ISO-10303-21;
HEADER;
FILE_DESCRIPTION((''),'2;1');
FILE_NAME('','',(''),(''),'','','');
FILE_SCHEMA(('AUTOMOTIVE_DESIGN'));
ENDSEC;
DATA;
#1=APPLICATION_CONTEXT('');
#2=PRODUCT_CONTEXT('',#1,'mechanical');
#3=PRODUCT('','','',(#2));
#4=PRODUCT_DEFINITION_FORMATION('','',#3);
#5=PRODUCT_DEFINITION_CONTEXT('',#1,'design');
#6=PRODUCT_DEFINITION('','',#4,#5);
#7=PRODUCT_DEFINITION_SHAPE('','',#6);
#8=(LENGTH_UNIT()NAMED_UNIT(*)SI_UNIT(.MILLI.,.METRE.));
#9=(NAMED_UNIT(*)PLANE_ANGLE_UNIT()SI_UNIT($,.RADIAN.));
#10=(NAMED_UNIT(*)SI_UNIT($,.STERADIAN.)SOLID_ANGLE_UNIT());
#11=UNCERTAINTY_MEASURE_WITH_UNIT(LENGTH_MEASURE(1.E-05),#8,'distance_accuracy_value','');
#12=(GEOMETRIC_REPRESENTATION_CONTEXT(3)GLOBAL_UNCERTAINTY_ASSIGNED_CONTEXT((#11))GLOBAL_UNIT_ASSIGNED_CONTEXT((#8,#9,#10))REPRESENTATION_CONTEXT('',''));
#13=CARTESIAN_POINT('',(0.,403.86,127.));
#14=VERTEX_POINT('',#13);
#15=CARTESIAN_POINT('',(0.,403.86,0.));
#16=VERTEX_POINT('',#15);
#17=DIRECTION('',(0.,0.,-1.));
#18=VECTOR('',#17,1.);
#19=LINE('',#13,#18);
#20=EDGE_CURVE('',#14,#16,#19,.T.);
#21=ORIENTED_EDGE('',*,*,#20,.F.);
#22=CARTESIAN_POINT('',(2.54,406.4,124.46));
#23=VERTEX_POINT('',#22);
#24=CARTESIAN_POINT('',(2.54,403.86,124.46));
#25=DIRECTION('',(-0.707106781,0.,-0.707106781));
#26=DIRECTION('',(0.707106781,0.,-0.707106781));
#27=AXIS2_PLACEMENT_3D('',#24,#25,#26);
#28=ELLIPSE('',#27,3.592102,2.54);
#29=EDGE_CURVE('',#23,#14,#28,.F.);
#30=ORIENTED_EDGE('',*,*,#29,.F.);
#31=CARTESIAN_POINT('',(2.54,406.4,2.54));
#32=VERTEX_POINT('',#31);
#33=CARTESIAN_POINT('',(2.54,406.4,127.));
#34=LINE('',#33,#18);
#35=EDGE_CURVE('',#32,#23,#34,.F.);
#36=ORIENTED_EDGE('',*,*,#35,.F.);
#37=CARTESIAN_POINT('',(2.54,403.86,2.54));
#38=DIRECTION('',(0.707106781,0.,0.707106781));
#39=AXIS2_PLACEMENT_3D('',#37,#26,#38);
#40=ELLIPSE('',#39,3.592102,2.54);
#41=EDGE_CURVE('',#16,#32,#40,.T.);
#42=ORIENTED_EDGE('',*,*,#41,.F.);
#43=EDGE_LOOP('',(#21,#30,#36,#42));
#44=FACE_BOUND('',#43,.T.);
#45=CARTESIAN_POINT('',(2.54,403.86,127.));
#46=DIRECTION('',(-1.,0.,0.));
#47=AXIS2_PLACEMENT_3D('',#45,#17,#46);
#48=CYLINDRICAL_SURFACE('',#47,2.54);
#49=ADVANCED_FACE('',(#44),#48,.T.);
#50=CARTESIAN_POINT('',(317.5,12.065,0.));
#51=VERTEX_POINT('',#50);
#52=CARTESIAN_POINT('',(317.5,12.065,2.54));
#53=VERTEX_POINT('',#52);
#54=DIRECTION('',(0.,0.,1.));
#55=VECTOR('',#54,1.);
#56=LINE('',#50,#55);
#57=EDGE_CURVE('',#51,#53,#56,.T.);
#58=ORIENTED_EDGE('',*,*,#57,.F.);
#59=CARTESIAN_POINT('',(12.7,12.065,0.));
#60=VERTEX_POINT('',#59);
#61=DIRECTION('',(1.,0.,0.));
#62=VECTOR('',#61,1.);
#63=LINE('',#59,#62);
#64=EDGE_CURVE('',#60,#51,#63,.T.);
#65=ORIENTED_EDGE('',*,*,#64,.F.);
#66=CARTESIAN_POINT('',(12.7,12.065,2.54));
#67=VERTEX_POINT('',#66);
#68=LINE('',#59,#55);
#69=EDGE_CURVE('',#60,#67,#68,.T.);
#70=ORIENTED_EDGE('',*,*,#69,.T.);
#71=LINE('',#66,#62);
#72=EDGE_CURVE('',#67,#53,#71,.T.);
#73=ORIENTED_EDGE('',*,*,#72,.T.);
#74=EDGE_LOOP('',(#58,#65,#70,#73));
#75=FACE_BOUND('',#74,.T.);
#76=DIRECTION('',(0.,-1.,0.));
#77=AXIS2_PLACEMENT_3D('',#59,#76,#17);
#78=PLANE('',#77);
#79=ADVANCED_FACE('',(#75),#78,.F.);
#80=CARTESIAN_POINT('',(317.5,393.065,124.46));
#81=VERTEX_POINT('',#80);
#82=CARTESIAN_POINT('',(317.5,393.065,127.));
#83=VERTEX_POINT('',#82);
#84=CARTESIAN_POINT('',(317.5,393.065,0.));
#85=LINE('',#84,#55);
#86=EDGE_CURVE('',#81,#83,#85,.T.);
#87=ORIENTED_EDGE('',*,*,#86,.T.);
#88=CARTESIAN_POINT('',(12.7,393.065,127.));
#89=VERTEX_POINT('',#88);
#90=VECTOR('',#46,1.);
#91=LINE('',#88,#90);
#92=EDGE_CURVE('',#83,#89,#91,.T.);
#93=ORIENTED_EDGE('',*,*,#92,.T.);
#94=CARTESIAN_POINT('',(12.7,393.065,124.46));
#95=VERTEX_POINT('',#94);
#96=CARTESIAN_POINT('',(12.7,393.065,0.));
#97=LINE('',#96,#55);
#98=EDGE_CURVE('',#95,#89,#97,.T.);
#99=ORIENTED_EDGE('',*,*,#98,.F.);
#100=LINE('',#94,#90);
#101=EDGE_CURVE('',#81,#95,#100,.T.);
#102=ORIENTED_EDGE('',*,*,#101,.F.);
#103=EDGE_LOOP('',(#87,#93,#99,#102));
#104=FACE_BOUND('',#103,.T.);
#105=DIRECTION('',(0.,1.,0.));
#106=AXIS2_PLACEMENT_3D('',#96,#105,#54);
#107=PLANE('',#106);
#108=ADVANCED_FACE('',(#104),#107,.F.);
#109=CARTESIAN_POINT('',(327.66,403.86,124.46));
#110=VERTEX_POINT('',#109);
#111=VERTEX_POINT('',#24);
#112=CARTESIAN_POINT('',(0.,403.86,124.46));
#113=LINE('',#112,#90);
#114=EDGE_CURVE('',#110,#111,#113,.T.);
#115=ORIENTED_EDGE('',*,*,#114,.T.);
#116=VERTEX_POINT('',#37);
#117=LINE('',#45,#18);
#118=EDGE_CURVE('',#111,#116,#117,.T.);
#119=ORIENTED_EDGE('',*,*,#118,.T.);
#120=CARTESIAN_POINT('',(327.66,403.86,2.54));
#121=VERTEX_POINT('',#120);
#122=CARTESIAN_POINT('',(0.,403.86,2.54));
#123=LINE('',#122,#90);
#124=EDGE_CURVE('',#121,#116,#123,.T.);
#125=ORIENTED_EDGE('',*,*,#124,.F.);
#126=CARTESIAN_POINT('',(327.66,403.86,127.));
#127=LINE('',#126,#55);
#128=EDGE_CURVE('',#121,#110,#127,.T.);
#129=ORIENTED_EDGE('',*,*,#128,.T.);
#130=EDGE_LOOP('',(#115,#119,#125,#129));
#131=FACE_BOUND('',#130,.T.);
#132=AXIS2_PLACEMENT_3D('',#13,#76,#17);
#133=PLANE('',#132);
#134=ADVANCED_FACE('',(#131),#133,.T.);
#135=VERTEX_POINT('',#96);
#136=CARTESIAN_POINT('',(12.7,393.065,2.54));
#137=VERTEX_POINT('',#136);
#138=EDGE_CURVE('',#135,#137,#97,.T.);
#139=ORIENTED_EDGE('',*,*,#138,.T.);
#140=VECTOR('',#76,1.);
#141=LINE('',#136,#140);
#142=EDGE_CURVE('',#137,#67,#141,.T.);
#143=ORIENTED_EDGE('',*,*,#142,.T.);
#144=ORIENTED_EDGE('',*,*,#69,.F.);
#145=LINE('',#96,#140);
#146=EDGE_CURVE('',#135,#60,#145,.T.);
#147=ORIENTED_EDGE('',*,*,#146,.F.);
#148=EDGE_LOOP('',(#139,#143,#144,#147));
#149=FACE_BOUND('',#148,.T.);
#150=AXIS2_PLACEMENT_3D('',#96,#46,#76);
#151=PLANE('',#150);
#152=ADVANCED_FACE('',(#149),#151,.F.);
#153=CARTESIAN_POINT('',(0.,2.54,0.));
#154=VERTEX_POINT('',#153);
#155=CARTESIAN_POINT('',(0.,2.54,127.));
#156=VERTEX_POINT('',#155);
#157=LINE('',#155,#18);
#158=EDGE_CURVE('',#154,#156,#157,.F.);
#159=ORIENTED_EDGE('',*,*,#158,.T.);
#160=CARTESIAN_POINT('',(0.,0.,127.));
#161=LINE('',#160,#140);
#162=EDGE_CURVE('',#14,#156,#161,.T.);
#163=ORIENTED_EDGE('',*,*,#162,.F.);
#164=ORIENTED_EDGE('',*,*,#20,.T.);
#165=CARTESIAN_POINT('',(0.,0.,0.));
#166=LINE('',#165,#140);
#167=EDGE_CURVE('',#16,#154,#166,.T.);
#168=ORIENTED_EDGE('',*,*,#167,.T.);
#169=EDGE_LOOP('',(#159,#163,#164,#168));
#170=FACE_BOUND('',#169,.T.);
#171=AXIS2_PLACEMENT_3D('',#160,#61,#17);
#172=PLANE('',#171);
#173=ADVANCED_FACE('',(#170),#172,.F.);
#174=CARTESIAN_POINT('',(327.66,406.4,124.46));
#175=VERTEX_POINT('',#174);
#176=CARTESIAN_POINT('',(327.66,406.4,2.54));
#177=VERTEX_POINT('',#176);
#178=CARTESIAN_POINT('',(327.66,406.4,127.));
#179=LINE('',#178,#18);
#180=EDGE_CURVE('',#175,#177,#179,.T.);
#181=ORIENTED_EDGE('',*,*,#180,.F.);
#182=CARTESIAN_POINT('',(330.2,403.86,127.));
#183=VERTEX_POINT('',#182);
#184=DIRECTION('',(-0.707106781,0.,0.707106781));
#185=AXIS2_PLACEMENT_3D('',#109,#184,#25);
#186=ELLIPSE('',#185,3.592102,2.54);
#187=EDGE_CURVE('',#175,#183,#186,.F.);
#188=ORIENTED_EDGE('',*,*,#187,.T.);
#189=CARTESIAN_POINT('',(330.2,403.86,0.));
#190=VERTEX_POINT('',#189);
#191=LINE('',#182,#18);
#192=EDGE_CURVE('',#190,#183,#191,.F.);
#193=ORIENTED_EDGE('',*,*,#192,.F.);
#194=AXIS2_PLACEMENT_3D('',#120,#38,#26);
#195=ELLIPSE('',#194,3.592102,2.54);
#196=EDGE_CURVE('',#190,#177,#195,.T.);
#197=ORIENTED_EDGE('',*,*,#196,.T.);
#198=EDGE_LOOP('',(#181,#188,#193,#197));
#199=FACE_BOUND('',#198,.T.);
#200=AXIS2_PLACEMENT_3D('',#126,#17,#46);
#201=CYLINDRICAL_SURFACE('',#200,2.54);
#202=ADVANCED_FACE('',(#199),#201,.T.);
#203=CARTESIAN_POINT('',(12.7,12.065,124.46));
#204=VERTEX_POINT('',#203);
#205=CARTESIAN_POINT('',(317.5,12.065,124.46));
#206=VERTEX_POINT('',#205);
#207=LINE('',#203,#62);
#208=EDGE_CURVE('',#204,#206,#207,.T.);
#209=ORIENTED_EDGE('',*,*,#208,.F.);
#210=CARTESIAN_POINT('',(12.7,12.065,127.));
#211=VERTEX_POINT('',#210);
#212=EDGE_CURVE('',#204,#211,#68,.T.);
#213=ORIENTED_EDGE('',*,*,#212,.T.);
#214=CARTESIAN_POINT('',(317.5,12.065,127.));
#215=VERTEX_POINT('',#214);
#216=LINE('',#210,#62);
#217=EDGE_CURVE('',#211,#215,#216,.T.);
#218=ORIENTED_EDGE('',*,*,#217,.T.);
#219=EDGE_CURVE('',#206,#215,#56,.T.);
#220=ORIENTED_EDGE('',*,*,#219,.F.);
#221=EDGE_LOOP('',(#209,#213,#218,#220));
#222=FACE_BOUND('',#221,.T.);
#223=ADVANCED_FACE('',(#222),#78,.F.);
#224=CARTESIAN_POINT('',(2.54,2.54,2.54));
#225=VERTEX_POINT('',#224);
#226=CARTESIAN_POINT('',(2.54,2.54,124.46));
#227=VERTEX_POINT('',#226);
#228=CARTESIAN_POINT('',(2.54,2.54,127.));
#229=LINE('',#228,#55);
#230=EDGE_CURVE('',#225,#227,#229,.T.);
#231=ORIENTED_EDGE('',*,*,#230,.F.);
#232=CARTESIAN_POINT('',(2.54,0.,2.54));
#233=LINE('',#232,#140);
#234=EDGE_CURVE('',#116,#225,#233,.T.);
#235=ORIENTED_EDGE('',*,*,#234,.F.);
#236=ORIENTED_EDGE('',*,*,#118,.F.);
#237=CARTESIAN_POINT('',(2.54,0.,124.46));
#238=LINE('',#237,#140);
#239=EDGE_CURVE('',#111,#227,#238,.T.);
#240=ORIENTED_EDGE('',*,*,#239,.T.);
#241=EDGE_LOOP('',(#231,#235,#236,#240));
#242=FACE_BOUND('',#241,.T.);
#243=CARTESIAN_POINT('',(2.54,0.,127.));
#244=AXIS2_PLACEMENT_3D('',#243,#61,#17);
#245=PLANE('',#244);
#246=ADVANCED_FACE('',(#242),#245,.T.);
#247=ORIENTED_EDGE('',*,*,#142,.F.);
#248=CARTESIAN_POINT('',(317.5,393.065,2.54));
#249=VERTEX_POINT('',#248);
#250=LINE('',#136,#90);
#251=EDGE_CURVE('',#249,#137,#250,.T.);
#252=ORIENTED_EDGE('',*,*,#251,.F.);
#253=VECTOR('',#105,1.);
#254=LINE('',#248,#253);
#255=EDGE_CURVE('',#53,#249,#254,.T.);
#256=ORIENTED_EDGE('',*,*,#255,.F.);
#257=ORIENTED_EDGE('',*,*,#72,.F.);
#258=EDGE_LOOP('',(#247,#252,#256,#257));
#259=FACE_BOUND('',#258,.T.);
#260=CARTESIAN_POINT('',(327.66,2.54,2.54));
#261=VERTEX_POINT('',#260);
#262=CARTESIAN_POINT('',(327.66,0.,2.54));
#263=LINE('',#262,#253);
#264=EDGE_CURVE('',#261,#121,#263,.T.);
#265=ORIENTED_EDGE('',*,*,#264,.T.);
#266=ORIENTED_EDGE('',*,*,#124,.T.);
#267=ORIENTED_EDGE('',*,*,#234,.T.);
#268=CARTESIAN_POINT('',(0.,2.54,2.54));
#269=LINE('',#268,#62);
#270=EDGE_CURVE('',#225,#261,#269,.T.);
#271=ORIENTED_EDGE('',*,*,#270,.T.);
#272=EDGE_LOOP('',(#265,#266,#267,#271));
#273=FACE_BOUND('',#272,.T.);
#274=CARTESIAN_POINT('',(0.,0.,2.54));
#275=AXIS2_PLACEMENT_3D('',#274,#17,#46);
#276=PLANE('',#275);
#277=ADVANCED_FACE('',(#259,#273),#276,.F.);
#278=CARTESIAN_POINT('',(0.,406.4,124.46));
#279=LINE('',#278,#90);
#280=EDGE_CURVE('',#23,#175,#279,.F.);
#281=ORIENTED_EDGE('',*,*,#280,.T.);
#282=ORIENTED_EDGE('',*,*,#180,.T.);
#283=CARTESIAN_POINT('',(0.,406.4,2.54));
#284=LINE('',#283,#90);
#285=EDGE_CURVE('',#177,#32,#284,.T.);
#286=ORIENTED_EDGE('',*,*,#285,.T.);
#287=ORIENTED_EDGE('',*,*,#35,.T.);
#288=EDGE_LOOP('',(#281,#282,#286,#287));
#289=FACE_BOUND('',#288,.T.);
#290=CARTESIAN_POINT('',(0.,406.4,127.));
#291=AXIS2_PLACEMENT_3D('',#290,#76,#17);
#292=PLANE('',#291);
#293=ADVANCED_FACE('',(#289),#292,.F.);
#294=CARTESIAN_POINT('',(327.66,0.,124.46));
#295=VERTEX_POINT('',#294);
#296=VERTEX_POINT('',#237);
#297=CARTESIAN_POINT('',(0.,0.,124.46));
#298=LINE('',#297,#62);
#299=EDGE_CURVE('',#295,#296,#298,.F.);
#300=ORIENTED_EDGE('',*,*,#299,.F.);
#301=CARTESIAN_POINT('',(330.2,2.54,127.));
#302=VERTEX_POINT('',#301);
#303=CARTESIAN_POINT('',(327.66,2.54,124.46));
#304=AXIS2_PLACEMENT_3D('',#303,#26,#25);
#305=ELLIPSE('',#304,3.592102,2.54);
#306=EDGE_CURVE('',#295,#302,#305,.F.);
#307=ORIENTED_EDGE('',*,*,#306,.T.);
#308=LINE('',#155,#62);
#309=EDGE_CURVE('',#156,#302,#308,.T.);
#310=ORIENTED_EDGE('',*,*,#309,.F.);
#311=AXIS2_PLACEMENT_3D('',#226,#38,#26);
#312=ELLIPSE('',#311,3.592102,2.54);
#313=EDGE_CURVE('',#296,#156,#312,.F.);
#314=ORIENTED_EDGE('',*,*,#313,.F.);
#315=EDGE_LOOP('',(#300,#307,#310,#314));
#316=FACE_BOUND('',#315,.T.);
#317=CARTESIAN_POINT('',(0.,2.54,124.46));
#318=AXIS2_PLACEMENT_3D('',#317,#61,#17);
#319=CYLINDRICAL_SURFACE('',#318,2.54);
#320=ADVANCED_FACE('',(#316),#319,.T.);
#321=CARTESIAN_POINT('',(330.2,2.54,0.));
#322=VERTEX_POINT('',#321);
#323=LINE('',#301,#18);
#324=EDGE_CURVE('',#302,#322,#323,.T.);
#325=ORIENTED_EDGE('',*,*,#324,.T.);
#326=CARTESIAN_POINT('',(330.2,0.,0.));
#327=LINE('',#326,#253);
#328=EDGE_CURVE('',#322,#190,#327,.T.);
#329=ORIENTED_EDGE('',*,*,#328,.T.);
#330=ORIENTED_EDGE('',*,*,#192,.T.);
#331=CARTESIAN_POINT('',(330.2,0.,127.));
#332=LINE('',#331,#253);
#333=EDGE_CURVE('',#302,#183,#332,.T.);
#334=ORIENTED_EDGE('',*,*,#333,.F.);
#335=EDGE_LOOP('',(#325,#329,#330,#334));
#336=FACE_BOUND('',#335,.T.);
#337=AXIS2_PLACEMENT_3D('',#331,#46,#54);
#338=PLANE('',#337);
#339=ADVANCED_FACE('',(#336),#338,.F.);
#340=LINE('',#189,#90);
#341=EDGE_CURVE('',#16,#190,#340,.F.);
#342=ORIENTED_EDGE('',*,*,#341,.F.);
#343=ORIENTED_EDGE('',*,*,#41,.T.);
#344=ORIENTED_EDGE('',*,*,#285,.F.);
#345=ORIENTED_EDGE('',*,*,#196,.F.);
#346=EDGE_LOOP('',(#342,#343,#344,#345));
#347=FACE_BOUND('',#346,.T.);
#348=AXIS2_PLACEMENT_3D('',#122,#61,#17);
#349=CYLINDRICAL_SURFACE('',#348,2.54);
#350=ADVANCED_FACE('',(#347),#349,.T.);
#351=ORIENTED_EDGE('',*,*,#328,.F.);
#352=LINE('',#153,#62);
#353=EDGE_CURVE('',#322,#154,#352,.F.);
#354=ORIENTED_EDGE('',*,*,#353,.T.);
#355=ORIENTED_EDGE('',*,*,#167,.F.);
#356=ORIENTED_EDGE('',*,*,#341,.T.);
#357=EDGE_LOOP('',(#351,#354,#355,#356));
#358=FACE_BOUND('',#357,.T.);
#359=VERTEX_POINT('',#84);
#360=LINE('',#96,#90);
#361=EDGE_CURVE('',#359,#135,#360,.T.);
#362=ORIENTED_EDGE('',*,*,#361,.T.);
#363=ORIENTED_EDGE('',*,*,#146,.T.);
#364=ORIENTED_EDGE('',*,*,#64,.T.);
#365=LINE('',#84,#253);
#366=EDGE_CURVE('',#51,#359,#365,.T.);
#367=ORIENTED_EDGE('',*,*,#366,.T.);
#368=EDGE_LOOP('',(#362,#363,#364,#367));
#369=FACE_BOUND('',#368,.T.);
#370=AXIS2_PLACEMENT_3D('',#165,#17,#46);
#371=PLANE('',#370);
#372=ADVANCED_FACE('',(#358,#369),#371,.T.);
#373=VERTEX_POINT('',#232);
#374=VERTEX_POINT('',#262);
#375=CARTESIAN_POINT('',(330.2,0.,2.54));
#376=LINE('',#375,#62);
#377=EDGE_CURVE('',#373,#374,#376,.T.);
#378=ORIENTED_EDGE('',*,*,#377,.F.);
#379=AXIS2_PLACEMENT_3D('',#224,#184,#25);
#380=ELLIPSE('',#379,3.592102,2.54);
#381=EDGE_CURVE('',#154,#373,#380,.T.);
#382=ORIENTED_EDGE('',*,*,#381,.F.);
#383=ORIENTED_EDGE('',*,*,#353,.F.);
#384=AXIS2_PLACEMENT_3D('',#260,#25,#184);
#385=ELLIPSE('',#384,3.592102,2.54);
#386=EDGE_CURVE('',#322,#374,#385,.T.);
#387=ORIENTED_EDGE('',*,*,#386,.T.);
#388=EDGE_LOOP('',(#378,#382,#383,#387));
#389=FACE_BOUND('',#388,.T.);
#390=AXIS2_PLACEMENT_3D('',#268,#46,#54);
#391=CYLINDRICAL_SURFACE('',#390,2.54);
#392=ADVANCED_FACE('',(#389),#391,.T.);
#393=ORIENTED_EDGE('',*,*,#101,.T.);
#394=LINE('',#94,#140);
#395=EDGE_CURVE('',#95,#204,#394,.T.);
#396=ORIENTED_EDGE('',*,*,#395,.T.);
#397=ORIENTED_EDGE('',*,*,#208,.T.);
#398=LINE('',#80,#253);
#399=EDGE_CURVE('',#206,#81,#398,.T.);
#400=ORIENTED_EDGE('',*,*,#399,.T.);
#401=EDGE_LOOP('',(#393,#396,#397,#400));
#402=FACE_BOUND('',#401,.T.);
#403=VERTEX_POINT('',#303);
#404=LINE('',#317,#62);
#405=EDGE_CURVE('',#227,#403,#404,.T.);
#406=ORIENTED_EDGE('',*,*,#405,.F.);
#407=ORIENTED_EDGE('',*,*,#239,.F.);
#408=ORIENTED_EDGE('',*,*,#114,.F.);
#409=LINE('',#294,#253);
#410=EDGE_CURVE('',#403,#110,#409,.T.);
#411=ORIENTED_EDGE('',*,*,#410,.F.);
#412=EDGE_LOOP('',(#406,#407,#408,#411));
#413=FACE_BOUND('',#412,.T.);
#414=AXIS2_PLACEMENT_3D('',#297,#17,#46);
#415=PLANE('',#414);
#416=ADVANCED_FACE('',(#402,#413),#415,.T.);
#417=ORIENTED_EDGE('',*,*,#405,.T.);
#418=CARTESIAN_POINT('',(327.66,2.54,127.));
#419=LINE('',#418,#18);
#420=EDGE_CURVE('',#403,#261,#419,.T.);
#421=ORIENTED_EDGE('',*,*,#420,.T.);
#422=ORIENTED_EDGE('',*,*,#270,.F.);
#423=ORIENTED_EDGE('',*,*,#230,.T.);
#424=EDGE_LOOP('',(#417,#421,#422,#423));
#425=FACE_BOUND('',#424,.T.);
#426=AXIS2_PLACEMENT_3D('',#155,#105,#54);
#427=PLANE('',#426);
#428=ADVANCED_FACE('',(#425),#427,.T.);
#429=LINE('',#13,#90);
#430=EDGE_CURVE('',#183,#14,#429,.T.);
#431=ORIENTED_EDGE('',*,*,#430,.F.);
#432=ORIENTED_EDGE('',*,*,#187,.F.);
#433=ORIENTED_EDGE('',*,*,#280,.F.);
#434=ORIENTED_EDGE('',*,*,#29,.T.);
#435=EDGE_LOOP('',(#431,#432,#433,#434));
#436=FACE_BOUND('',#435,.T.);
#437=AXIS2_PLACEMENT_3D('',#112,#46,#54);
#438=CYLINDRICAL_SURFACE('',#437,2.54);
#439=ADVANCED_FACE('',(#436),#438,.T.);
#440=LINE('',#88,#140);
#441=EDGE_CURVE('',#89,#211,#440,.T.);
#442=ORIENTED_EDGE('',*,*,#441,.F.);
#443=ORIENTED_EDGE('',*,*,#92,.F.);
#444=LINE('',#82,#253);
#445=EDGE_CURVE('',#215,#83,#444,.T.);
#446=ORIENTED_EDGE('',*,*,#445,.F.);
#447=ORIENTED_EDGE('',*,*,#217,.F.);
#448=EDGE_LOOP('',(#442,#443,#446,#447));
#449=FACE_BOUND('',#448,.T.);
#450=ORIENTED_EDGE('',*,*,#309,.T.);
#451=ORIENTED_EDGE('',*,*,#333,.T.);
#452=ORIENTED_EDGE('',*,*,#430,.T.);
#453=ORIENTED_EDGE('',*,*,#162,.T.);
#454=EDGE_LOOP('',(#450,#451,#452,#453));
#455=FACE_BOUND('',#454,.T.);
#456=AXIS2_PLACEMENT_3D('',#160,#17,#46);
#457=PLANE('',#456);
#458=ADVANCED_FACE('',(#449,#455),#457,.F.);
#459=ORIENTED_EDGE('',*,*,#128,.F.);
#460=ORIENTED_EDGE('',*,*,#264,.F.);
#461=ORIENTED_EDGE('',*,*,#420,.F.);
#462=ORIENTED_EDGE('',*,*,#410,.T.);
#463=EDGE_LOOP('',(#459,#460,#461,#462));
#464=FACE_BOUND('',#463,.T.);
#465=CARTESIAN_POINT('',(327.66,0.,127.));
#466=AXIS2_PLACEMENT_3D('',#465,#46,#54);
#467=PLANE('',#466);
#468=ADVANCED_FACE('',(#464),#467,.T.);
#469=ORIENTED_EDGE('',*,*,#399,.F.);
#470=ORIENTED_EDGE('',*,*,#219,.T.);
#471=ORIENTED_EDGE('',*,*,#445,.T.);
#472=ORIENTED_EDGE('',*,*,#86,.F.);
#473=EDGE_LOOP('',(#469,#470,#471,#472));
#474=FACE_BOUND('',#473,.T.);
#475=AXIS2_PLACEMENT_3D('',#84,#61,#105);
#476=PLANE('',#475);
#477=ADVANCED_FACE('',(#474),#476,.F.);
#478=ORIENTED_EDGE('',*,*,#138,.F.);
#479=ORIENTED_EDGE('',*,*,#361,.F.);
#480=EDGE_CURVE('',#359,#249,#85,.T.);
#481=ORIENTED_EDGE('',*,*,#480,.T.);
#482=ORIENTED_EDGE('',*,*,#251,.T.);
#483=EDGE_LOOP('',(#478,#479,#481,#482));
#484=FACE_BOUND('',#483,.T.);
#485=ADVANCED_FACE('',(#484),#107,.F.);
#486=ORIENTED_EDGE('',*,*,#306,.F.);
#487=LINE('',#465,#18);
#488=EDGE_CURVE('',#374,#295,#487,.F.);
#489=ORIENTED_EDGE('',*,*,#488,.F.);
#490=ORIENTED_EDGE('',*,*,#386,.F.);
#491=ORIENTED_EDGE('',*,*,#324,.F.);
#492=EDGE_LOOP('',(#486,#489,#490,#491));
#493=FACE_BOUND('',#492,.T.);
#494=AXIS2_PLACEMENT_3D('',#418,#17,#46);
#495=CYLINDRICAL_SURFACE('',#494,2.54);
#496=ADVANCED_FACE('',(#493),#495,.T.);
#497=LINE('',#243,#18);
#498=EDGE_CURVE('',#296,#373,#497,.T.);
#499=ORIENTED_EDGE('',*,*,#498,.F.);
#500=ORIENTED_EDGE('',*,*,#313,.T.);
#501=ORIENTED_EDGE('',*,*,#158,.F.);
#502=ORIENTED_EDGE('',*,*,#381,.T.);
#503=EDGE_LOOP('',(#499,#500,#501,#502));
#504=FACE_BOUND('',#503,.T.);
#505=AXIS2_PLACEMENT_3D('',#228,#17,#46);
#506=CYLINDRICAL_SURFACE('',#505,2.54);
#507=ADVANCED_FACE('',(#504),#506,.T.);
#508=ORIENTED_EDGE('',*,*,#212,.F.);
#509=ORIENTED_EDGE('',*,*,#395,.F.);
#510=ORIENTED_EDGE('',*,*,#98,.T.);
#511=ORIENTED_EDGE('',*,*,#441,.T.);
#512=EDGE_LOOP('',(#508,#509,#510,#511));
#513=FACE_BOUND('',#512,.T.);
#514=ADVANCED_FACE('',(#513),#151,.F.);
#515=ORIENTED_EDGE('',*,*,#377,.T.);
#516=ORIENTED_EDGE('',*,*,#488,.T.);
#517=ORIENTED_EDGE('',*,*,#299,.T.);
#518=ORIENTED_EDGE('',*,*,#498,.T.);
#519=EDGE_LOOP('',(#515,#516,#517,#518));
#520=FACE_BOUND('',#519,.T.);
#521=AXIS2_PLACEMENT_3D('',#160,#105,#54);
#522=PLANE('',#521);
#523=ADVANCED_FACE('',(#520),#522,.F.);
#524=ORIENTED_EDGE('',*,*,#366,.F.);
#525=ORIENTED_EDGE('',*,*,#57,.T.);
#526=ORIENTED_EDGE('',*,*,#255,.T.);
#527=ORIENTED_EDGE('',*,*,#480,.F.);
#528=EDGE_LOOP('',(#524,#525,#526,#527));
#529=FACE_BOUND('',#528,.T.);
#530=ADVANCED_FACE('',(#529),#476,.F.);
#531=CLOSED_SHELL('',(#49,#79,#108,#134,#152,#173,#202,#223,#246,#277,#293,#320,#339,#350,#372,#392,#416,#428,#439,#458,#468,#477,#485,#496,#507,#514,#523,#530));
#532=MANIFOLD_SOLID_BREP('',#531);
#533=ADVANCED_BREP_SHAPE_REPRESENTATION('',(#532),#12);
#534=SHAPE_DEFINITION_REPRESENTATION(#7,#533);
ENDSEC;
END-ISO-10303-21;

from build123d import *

# Parameters (mm, degrees)
SKETCH2_W           = 330.2
SKETCH2_H           = 406.4
BOSS_EXTRUDE1_DEPTH = 127
FILLET1_R           = 2.54
FILLET2_R           = 2.54
SKETCH3_W           = 304.8
SKETCH3_H           = 381
CUT_EXTRUDE1_DEPTH  = 127
SHELL4_START        = 2.54
SHELL4_OUTLINE_W    = 401.32
SHELL4_OUTLINE_H    = 121.92
SHELL4_DEPTH        = 325.12


# Read off the part's stored shape, not the designer's step: Shell4
with BuildPart() as part:
    # Sketch2 → Boss-Extrude1 (new body)
    with BuildSketch(Plane.XY):
        with Locations((165.1, 203.2)):
            Rectangle(SKETCH2_W, SKETCH2_H)
    extrude(amount=BOSS_EXTRUDE1_DEPTH)

    # Fillet1
    fillet1_edges = [part.edges().sort_by_distance(p)[0] for p in [
        (165.1, 406.4, 127),
        (165.1, 406.4, 0),
        (0, 406.4, 63.5),
        (330.2, 406.4, 63.5),
    ]]
    fillet(fillet1_edges, radius=FILLET1_R)

    # Fillet2
    fillet2_edges = [part.edges().sort_by_distance(p)[0] for p in [
        (165.1, 0, 0),
        (330.2, 0, 63.5),
        (0, 0, 63.5),
        (165.1, 0, 127),
    ]]
    fillet(fillet2_edges, radius=FILLET2_R)

    # Sketch3 → Cut-Extrude1 (cut)
    with BuildSketch(Plane.XY.offset(127)):
        with Locations((165.1, 202.565)):
            Rectangle(SKETCH3_W, SKETCH3_H)
    extrude(amount=-CUT_EXTRUDE1_DEPTH, mode=Mode.SUBTRACT)

    # Shell4 outline → Shell4 (cut)
    with BuildSketch(Plane.YZ.offset(SHELL4_START)):
        with Locations((203.2, 63.5)):
            Rectangle(SHELL4_OUTLINE_W, SHELL4_OUTLINE_H)
    extrude(amount=SHELL4_DEPTH, mode=Mode.SUBTRACT)


solid = part.part
